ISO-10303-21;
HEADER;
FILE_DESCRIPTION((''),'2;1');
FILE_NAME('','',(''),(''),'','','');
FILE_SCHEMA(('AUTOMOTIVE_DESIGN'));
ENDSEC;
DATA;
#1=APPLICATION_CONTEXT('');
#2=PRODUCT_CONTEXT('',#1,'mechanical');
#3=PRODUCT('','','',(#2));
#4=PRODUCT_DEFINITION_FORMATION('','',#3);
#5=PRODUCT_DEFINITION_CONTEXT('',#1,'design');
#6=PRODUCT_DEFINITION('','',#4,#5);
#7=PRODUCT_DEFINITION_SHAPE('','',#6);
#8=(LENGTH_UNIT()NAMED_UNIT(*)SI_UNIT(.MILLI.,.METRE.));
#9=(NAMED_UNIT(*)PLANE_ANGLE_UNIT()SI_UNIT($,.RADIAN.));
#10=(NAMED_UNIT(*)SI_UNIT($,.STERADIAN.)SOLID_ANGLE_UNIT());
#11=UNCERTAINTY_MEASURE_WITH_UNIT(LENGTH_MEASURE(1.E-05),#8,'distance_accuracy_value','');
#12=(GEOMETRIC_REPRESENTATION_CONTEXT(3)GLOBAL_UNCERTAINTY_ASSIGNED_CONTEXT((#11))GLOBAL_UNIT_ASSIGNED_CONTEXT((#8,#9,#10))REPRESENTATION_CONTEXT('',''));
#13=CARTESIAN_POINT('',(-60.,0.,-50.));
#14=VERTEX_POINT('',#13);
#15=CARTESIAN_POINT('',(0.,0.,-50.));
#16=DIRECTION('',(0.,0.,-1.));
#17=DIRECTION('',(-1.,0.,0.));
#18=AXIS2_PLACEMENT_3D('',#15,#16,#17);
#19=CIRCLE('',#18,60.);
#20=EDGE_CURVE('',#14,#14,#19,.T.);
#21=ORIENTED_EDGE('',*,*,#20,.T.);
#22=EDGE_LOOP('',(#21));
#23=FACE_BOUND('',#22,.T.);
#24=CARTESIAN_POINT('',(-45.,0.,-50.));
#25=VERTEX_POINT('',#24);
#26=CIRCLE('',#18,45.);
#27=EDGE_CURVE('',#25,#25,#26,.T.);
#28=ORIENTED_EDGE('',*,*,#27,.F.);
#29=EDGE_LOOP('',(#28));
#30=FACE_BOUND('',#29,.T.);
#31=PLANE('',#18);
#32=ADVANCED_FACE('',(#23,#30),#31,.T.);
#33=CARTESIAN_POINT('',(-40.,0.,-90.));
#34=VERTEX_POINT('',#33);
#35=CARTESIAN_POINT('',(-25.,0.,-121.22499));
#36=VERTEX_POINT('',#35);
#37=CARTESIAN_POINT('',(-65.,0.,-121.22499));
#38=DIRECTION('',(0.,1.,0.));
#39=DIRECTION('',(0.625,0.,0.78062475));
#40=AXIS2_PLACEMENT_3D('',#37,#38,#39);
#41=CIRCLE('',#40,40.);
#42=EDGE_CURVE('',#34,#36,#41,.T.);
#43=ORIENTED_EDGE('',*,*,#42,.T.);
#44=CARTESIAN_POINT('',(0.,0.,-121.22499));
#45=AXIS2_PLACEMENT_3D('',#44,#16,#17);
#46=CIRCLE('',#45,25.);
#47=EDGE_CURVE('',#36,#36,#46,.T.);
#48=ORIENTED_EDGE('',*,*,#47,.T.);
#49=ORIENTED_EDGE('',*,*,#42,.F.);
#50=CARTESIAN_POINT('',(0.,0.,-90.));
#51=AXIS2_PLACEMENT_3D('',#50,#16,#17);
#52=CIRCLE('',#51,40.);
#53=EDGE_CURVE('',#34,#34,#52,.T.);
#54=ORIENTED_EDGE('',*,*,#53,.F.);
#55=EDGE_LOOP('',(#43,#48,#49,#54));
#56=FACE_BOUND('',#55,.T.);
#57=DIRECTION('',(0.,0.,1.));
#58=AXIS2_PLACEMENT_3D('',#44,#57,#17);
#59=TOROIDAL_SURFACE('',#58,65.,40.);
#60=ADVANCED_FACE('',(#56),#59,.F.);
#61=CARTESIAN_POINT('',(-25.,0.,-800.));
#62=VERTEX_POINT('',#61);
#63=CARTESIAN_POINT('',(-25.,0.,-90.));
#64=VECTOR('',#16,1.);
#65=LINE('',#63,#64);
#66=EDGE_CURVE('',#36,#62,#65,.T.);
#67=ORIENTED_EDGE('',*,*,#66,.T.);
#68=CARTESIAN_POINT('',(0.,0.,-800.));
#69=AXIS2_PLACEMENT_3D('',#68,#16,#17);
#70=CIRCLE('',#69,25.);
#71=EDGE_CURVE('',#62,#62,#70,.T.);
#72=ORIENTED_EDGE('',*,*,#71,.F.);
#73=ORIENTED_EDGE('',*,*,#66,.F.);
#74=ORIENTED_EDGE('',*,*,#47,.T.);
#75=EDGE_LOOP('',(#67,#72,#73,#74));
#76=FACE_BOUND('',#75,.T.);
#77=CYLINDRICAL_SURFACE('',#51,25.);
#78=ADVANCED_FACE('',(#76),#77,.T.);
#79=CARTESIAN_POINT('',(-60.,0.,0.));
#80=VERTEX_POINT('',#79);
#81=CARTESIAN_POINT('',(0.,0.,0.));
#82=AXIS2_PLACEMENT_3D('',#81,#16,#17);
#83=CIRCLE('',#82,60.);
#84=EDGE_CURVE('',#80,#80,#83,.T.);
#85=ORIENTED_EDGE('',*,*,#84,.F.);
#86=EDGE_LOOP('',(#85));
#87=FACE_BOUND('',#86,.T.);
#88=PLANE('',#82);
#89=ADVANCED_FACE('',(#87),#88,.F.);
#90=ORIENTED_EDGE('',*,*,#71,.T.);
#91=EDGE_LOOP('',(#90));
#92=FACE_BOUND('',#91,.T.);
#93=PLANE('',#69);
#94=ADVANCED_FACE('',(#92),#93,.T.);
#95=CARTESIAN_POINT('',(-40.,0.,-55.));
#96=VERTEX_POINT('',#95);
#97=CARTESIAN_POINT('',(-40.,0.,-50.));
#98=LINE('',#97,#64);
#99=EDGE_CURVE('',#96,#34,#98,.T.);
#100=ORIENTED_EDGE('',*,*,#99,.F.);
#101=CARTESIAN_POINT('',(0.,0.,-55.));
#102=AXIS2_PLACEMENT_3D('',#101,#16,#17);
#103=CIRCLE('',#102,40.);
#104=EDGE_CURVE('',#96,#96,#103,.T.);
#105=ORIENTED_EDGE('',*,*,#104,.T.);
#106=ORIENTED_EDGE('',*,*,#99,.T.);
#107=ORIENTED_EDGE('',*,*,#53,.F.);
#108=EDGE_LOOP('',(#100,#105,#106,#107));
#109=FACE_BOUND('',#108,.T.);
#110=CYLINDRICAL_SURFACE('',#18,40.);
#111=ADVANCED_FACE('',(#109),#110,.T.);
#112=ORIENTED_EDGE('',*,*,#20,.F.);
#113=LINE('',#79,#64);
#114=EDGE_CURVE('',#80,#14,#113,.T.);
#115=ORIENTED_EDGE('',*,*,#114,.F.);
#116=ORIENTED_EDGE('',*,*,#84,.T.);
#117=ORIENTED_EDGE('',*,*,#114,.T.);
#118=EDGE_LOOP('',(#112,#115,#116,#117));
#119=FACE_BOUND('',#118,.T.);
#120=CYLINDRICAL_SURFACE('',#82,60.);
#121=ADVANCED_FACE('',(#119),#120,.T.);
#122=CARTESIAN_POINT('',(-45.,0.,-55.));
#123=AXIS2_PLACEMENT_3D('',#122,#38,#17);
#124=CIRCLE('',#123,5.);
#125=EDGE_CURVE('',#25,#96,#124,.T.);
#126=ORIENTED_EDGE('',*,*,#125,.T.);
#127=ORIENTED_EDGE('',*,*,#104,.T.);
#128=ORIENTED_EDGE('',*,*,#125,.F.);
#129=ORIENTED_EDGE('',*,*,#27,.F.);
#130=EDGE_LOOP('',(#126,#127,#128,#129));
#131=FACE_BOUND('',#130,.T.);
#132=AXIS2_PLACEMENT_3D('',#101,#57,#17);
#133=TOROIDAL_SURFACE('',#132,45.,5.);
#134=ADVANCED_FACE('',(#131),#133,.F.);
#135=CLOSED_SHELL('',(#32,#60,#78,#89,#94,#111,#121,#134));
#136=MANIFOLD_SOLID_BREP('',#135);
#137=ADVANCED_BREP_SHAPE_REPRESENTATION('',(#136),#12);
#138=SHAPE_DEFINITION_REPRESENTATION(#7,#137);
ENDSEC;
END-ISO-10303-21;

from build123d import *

# Parameters (mm, degrees)
F2_R = 5


# Not quite as in the source:
# - a fillet or chamfer that OpenCascade refuses, or shapes differently, is made with other operations: its cross-section is extruded or revolved along the edge and cut away or added


with BuildPart() as f1:
    # F0 (on Front) → F1 (revolve)
    with BuildSketch(Plane.XZ):
        Polygon((0, -800), (0, 0), (-60, 0), (-60, -50), (-40, -50), (-40, -90), (-25, -90), (-25, -800), align=None)
    revolve(axis=Axis((0, 0, -400), (0, 0, -1)))

    # F2
    f2_edges = [f1.edges().sort_by_distance(p)[0] for p in [
        (40, 0, -50),
    ]]
    fillet(f2_edges, radius=F2_R)

    # F3: fillet of radius 40 on 1 edges, made by hand

    # F3_s1 → F3_t2 (revolve)
    with BuildSketch(Plane.XZ):
        with BuildLine():
            ThreePointArc((-40, -90), (-28.9444872454, -103.9044819163), (-25, -121.224989992))
            Line((-25, -121.224989992), (-25, -90))
            Line((-25, -90), (-40, -90))
        make_face()
    revolve(axis=Axis((0, 0, -90), (0, 0, -1)))


solid = f1.part
